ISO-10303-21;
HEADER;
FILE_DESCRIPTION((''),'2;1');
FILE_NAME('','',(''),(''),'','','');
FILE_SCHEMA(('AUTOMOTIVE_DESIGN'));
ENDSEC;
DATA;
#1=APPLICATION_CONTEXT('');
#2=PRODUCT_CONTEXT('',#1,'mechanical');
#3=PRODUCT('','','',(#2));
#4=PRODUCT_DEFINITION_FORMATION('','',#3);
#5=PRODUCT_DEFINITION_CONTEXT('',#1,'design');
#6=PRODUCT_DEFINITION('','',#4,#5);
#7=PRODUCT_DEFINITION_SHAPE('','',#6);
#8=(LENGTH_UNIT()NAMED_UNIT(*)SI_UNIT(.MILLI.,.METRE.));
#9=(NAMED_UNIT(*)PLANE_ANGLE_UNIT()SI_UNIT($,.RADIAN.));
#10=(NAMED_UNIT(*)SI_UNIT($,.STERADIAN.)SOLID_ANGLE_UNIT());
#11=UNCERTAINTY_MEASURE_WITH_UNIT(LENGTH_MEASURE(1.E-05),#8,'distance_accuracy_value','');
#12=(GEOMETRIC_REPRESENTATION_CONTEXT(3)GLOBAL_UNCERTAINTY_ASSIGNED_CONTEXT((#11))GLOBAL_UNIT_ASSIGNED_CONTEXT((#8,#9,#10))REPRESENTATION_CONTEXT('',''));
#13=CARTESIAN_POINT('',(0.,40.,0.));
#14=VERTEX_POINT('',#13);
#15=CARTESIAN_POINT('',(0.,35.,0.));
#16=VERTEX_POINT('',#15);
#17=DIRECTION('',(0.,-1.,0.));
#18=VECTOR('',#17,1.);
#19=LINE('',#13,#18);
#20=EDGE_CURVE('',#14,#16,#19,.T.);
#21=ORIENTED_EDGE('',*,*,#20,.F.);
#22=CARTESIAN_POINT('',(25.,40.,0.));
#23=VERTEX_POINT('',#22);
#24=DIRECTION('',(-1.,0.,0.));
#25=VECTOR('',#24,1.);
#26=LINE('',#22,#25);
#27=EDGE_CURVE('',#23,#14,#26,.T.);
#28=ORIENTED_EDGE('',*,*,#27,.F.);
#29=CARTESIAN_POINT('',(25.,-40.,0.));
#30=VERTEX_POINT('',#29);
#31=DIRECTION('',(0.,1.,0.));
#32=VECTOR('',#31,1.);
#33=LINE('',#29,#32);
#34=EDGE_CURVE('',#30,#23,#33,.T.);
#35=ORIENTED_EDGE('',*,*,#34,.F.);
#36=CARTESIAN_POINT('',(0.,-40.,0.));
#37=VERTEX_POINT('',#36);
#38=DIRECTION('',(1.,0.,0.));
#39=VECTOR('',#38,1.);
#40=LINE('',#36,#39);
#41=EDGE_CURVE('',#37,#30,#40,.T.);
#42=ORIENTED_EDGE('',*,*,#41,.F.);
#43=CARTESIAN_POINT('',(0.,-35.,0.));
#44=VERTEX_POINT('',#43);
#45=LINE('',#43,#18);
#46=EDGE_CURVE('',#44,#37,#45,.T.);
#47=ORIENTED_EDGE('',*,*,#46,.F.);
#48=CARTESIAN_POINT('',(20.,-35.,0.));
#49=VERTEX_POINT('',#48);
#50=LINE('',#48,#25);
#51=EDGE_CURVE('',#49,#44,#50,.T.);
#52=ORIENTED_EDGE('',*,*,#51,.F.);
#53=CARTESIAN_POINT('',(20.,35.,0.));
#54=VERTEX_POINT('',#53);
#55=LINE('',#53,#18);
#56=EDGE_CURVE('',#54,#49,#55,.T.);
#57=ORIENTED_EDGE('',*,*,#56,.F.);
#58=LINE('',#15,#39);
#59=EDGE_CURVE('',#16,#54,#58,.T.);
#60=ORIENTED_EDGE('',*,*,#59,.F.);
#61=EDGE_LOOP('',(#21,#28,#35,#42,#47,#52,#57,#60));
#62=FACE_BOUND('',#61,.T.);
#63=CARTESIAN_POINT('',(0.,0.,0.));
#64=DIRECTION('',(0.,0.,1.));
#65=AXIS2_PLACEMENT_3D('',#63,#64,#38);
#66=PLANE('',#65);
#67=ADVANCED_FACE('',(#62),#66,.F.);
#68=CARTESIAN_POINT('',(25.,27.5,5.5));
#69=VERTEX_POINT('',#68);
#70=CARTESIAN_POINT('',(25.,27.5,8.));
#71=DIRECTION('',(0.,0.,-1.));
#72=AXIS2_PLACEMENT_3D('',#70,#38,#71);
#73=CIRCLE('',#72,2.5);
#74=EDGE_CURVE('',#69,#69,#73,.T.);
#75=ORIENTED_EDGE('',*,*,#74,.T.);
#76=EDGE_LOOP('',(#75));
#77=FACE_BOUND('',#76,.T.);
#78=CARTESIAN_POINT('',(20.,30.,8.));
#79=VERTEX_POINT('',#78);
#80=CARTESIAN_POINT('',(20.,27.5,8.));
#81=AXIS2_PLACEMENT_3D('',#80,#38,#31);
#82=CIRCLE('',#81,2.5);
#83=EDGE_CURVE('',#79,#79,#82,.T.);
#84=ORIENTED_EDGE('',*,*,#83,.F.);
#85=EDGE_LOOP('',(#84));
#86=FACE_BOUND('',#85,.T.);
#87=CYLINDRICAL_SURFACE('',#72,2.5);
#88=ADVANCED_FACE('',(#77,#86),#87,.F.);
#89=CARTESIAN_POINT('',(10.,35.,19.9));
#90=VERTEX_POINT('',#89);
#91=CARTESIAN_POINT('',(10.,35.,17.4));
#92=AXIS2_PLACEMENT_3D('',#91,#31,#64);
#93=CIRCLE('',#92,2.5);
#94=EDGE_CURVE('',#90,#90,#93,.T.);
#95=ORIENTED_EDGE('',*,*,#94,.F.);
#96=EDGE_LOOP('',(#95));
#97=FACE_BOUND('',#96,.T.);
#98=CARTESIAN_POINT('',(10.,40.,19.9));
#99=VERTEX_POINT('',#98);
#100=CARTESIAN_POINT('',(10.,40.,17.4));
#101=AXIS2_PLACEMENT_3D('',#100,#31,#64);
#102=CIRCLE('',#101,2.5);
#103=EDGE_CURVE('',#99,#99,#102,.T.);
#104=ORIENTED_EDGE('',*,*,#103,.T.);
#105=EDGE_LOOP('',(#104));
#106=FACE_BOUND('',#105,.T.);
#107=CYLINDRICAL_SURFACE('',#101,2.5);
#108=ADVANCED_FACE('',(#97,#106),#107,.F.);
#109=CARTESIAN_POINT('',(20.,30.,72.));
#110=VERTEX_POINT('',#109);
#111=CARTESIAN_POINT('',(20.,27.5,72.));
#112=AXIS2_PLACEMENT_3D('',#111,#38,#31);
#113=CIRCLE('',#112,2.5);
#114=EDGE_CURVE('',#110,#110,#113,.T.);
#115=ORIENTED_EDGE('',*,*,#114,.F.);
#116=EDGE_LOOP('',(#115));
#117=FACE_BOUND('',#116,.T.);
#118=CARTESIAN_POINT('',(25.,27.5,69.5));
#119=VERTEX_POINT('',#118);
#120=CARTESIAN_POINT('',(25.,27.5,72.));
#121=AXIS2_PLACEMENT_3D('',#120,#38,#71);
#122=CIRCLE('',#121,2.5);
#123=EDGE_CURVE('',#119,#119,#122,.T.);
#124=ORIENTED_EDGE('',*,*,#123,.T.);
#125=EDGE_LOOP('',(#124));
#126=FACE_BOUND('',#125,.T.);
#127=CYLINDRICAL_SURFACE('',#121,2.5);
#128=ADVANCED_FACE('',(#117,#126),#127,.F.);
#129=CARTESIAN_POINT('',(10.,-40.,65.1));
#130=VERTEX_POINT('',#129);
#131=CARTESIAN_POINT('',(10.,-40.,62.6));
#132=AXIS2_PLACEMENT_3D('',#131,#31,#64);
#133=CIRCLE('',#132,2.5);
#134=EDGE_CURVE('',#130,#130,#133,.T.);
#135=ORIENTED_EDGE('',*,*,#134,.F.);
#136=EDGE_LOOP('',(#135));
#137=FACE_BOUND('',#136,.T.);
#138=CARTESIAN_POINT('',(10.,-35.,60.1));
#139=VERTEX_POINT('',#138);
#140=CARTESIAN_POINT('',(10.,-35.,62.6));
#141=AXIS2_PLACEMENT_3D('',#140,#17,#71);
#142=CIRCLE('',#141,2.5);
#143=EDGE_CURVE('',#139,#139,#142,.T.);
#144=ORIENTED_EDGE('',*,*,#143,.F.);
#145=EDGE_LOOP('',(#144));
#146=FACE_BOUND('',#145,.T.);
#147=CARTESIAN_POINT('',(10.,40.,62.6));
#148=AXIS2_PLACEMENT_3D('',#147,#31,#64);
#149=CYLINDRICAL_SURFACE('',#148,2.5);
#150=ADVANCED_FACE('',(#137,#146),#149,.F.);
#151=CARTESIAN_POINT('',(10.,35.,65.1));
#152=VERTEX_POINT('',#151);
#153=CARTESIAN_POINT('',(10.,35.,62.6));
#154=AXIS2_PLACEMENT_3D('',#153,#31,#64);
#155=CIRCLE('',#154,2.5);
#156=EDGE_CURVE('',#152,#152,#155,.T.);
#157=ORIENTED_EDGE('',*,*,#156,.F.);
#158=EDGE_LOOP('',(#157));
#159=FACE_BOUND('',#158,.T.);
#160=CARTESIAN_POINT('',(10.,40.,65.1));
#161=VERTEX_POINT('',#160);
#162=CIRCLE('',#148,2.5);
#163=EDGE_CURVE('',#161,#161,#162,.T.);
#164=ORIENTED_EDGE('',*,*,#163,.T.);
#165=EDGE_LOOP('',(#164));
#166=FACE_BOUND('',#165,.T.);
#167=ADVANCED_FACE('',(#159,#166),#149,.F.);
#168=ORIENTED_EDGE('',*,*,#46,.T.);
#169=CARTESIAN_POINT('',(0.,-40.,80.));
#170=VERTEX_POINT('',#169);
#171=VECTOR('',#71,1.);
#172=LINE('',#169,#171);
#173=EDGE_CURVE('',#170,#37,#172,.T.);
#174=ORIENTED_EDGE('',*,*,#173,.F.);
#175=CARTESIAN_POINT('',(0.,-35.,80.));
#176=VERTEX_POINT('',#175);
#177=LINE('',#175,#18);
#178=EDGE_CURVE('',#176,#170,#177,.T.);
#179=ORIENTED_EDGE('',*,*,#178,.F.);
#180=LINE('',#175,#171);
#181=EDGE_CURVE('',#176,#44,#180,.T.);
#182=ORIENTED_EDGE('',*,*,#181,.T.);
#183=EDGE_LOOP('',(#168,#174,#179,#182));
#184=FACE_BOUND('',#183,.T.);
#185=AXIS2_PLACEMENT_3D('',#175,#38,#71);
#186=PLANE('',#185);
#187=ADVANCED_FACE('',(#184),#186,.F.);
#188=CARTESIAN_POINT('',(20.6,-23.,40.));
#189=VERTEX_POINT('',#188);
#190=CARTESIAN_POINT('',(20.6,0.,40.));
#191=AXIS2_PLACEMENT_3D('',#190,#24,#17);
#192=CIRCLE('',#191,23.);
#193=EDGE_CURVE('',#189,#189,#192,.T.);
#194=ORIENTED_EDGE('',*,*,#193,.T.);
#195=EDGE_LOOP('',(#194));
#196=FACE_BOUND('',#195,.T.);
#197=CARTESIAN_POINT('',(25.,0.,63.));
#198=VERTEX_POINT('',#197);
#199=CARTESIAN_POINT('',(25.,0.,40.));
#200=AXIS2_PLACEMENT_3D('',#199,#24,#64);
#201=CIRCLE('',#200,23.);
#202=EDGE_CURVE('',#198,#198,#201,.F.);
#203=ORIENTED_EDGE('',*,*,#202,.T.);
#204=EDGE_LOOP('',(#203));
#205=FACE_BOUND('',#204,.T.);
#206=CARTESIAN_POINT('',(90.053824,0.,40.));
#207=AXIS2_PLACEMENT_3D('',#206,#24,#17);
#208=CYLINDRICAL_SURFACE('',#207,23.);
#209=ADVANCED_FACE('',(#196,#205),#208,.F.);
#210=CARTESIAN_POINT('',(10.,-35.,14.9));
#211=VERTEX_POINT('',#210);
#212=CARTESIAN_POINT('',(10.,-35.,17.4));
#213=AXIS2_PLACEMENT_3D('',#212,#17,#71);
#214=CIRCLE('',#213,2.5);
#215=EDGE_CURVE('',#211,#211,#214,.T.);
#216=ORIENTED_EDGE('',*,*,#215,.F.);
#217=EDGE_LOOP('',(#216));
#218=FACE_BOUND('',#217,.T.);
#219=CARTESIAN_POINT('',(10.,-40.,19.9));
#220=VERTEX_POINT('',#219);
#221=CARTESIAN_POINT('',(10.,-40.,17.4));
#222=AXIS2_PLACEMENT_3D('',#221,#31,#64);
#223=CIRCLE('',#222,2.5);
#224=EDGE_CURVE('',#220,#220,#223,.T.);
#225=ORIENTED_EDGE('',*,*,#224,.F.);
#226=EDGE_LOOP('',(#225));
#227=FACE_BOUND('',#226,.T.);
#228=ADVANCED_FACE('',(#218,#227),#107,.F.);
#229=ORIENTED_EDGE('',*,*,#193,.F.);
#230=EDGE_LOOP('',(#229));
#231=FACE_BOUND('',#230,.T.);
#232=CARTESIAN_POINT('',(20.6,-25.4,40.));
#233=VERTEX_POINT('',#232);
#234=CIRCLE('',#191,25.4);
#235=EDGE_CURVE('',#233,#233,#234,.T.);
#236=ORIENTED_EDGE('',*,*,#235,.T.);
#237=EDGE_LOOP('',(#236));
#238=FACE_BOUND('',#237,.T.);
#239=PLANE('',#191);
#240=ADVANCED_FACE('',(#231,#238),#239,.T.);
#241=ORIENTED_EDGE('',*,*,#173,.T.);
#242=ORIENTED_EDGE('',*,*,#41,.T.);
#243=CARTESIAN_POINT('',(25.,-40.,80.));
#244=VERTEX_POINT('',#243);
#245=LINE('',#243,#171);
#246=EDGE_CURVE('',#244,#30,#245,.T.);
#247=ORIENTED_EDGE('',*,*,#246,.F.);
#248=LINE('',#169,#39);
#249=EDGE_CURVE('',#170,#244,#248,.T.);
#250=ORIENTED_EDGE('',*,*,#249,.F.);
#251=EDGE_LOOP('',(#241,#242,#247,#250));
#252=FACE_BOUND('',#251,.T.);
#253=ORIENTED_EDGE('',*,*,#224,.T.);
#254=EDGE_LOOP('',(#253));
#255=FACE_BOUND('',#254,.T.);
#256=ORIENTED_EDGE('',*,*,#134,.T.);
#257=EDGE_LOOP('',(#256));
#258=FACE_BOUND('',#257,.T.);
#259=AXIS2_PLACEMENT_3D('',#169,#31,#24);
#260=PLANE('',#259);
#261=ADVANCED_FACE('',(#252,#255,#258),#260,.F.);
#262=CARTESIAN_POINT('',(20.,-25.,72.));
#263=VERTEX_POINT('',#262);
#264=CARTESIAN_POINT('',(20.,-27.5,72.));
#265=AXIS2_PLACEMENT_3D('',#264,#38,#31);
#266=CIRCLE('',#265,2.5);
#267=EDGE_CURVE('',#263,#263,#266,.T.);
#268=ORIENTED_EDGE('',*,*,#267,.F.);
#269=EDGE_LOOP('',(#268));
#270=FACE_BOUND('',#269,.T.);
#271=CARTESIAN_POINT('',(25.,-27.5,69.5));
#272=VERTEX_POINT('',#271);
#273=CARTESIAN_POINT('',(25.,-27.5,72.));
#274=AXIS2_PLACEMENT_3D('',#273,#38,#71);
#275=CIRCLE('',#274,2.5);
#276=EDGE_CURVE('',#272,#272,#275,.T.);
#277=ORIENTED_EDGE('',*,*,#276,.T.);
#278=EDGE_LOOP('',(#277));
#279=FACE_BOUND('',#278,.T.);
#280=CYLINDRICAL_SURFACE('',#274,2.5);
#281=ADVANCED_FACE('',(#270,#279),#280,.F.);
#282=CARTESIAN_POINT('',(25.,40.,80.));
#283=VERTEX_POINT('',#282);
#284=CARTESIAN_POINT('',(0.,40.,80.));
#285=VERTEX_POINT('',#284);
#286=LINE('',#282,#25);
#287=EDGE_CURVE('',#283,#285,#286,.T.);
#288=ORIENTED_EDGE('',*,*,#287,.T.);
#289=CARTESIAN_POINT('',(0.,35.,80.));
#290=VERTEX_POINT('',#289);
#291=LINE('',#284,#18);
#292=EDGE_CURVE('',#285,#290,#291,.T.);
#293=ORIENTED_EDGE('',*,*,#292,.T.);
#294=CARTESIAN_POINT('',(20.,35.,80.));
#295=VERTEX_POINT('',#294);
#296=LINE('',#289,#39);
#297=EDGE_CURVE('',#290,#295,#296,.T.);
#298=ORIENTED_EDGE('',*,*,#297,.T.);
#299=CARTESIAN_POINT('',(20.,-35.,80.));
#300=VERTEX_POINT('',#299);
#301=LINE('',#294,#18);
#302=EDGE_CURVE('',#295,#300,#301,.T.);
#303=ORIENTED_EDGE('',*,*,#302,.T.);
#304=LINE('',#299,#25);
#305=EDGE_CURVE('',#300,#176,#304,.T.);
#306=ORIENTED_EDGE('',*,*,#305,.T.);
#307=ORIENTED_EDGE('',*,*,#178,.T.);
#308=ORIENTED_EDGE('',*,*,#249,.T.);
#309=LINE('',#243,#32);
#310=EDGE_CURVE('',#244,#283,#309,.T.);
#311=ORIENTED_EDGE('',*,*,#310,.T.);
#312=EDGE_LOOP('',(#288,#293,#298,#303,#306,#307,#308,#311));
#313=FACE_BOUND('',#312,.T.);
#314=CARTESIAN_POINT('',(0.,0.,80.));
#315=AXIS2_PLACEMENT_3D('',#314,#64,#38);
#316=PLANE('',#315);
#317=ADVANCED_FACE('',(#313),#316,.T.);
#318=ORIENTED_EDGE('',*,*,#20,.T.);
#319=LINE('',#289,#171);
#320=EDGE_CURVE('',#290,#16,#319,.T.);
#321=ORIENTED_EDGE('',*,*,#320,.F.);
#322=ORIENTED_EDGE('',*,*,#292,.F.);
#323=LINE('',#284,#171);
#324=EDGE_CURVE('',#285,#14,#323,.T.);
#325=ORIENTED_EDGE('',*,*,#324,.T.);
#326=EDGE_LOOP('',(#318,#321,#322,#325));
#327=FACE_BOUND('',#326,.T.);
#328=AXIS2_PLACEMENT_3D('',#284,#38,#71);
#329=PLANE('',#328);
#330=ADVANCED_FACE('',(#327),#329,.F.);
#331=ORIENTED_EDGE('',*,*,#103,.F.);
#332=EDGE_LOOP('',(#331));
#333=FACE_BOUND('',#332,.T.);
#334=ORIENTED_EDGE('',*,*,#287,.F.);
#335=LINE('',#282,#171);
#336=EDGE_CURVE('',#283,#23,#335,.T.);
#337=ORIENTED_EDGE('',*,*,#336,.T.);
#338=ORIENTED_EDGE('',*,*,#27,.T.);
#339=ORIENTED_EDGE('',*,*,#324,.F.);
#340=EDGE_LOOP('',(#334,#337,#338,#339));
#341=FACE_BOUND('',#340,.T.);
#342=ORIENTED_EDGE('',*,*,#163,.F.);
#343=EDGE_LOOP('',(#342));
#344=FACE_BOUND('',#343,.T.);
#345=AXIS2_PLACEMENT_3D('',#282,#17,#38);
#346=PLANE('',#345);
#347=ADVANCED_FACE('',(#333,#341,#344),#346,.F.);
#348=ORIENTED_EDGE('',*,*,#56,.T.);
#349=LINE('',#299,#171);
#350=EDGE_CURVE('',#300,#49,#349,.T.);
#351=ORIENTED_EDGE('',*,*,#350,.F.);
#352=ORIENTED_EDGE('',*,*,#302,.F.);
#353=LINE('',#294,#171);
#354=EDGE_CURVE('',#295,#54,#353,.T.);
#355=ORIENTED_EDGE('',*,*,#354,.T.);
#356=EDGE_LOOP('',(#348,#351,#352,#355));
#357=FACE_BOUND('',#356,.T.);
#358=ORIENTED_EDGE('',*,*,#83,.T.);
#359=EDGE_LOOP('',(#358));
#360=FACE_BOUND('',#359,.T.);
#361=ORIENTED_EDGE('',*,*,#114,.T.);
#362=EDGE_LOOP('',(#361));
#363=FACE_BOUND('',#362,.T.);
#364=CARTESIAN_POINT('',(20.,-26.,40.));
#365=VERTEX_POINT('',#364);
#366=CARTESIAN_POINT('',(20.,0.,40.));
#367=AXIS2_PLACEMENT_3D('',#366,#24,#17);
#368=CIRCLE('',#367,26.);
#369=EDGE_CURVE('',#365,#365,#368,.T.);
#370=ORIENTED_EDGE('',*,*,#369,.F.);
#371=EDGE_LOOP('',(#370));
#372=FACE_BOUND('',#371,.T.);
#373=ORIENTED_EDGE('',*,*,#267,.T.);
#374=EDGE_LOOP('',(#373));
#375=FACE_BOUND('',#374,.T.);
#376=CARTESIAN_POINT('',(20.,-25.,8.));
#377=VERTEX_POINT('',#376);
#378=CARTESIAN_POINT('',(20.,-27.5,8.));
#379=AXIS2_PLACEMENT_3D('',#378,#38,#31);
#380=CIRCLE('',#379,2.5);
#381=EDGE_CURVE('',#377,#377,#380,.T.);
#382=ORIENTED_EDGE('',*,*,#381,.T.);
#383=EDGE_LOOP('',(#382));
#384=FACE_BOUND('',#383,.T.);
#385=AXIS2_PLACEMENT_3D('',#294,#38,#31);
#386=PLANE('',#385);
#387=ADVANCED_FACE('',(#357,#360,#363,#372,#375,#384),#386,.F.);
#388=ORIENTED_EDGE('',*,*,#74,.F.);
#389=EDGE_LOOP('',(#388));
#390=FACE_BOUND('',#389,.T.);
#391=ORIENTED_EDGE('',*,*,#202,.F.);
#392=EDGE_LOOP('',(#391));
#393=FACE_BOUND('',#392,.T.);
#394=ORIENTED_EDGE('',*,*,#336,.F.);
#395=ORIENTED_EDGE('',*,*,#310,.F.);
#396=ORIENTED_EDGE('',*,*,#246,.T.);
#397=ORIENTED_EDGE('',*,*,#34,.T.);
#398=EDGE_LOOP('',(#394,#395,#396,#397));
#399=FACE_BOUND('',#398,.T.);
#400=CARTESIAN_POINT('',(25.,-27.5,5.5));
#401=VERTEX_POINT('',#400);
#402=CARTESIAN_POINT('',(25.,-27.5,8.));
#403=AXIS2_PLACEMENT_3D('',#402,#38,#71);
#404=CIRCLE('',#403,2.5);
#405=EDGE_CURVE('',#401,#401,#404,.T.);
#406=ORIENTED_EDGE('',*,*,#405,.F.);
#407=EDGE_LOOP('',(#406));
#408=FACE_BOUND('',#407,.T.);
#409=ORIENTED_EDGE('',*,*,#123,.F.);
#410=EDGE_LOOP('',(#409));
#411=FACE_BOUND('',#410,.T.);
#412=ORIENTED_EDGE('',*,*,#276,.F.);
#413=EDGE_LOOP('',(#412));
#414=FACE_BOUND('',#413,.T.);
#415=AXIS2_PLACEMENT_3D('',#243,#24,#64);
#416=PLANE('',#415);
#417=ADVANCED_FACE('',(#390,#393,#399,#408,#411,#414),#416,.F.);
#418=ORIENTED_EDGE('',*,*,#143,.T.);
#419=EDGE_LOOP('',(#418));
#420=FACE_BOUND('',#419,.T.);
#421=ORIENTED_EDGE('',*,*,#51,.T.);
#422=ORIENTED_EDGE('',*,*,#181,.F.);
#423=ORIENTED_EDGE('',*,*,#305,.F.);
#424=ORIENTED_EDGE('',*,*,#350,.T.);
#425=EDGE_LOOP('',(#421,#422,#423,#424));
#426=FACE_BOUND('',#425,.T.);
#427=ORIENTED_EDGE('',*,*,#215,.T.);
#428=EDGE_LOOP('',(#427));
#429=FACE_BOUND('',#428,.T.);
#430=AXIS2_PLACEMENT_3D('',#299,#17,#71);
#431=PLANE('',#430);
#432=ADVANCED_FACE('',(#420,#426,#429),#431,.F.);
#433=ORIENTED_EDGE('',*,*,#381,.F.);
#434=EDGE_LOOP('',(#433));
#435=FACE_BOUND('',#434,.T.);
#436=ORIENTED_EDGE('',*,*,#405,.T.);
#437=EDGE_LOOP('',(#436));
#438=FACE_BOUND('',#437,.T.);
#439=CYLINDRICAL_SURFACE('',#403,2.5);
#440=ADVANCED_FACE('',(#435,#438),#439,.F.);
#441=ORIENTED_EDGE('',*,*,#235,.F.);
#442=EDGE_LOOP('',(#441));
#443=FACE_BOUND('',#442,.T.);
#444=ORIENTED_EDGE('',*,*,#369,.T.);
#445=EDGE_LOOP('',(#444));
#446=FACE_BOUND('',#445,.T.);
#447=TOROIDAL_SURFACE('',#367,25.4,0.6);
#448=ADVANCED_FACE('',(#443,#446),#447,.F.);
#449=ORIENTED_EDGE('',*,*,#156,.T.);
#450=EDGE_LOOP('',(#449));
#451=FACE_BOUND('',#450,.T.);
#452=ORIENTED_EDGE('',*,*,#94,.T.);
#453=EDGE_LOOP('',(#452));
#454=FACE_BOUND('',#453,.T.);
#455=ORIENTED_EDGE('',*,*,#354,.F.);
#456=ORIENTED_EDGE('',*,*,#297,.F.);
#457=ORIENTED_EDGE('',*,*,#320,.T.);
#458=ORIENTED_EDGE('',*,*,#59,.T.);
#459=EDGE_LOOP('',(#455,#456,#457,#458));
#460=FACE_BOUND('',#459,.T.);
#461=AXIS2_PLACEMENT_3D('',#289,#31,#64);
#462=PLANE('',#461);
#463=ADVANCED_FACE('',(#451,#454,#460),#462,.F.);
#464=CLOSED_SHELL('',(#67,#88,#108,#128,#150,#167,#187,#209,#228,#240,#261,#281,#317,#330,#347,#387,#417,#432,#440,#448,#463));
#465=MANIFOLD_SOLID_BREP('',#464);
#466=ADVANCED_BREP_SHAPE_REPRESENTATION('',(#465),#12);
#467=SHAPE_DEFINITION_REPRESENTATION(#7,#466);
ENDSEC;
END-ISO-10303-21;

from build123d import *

# Parameters (mm, degrees)
BOSS_EXTRUDE1_DEPTH   = 80
SKETCH2_R             = 26
CUT_EXTRUDE1_DEPTH    = 0.6
FILLET1_R             = 0.6
SKETCH3_R             = 23
CUT_EXTRUDE2_DEPTH    = 4.4
M6X1_0_TAPPED_HOLE1_D = 5
M6X1_0_TAPPED_HOLE2_D = 5


with BuildPart() as part:
    # Sketch1 → Boss-Extrude1 (new body)
    with BuildSketch(Plane.XY):
        Polygon((0, 35), (20, 35), (20, -35), (0, -35), (0, -40), (25, -40), (25, 40), (0, 40), align=None)
    extrude(amount=BOSS_EXTRUDE1_DEPTH)

    # Sketch2 → Cut-Extrude1 (cut)
    with BuildSketch(Plane.ZY.offset(-20)):
        with Locations(Location((40, 0, 0), (0, 0, 270))):
            Circle(SKETCH2_R)
    extrude(amount=-CUT_EXTRUDE1_DEPTH, mode=Mode.SUBTRACT)

    # Fillet1
    fillet1_edges = [part.edges().sort_by_distance(p)[0] for p in [
        (20.6, 26, 40),
    ]]
    fillet(fillet1_edges, radius=FILLET1_R - 0.0001)  # a hair under: the kernel refuses the full size

    # Sketch3 → Cut-Extrude2 (cut)
    with BuildSketch(Plane.ZY.offset(-20.6)):
        with Locations(Location((40, 0, 0), (0, 0, 270))):
            Circle(SKETCH3_R)
    extrude(amount=-CUT_EXTRUDE2_DEPTH, mode=Mode.SUBTRACT)

    # M6x1.0 Tapped Hole1 (through all)
    with Locations(Plane(origin=(0, 40, 0), x_dir=(1, 0, 0), z_dir=(0, 1, 0))):
        with Locations((10, -17.4), (10, -62.6)):
            Hole(M6X1_0_TAPPED_HOLE1_D / 2)

    # M6x1.0 Tapped Hole2 (through all)
    with Locations(Plane(origin=(25, 0, 0), x_dir=(0, 0, -1), z_dir=(1, 0, 0))):
        with Locations((-72, 27.5), (-8, 27.5), (-8, -27.5), (-72, -27.5)):
            Hole(M6X1_0_TAPPED_HOLE2_D / 2)


solid = part.part
